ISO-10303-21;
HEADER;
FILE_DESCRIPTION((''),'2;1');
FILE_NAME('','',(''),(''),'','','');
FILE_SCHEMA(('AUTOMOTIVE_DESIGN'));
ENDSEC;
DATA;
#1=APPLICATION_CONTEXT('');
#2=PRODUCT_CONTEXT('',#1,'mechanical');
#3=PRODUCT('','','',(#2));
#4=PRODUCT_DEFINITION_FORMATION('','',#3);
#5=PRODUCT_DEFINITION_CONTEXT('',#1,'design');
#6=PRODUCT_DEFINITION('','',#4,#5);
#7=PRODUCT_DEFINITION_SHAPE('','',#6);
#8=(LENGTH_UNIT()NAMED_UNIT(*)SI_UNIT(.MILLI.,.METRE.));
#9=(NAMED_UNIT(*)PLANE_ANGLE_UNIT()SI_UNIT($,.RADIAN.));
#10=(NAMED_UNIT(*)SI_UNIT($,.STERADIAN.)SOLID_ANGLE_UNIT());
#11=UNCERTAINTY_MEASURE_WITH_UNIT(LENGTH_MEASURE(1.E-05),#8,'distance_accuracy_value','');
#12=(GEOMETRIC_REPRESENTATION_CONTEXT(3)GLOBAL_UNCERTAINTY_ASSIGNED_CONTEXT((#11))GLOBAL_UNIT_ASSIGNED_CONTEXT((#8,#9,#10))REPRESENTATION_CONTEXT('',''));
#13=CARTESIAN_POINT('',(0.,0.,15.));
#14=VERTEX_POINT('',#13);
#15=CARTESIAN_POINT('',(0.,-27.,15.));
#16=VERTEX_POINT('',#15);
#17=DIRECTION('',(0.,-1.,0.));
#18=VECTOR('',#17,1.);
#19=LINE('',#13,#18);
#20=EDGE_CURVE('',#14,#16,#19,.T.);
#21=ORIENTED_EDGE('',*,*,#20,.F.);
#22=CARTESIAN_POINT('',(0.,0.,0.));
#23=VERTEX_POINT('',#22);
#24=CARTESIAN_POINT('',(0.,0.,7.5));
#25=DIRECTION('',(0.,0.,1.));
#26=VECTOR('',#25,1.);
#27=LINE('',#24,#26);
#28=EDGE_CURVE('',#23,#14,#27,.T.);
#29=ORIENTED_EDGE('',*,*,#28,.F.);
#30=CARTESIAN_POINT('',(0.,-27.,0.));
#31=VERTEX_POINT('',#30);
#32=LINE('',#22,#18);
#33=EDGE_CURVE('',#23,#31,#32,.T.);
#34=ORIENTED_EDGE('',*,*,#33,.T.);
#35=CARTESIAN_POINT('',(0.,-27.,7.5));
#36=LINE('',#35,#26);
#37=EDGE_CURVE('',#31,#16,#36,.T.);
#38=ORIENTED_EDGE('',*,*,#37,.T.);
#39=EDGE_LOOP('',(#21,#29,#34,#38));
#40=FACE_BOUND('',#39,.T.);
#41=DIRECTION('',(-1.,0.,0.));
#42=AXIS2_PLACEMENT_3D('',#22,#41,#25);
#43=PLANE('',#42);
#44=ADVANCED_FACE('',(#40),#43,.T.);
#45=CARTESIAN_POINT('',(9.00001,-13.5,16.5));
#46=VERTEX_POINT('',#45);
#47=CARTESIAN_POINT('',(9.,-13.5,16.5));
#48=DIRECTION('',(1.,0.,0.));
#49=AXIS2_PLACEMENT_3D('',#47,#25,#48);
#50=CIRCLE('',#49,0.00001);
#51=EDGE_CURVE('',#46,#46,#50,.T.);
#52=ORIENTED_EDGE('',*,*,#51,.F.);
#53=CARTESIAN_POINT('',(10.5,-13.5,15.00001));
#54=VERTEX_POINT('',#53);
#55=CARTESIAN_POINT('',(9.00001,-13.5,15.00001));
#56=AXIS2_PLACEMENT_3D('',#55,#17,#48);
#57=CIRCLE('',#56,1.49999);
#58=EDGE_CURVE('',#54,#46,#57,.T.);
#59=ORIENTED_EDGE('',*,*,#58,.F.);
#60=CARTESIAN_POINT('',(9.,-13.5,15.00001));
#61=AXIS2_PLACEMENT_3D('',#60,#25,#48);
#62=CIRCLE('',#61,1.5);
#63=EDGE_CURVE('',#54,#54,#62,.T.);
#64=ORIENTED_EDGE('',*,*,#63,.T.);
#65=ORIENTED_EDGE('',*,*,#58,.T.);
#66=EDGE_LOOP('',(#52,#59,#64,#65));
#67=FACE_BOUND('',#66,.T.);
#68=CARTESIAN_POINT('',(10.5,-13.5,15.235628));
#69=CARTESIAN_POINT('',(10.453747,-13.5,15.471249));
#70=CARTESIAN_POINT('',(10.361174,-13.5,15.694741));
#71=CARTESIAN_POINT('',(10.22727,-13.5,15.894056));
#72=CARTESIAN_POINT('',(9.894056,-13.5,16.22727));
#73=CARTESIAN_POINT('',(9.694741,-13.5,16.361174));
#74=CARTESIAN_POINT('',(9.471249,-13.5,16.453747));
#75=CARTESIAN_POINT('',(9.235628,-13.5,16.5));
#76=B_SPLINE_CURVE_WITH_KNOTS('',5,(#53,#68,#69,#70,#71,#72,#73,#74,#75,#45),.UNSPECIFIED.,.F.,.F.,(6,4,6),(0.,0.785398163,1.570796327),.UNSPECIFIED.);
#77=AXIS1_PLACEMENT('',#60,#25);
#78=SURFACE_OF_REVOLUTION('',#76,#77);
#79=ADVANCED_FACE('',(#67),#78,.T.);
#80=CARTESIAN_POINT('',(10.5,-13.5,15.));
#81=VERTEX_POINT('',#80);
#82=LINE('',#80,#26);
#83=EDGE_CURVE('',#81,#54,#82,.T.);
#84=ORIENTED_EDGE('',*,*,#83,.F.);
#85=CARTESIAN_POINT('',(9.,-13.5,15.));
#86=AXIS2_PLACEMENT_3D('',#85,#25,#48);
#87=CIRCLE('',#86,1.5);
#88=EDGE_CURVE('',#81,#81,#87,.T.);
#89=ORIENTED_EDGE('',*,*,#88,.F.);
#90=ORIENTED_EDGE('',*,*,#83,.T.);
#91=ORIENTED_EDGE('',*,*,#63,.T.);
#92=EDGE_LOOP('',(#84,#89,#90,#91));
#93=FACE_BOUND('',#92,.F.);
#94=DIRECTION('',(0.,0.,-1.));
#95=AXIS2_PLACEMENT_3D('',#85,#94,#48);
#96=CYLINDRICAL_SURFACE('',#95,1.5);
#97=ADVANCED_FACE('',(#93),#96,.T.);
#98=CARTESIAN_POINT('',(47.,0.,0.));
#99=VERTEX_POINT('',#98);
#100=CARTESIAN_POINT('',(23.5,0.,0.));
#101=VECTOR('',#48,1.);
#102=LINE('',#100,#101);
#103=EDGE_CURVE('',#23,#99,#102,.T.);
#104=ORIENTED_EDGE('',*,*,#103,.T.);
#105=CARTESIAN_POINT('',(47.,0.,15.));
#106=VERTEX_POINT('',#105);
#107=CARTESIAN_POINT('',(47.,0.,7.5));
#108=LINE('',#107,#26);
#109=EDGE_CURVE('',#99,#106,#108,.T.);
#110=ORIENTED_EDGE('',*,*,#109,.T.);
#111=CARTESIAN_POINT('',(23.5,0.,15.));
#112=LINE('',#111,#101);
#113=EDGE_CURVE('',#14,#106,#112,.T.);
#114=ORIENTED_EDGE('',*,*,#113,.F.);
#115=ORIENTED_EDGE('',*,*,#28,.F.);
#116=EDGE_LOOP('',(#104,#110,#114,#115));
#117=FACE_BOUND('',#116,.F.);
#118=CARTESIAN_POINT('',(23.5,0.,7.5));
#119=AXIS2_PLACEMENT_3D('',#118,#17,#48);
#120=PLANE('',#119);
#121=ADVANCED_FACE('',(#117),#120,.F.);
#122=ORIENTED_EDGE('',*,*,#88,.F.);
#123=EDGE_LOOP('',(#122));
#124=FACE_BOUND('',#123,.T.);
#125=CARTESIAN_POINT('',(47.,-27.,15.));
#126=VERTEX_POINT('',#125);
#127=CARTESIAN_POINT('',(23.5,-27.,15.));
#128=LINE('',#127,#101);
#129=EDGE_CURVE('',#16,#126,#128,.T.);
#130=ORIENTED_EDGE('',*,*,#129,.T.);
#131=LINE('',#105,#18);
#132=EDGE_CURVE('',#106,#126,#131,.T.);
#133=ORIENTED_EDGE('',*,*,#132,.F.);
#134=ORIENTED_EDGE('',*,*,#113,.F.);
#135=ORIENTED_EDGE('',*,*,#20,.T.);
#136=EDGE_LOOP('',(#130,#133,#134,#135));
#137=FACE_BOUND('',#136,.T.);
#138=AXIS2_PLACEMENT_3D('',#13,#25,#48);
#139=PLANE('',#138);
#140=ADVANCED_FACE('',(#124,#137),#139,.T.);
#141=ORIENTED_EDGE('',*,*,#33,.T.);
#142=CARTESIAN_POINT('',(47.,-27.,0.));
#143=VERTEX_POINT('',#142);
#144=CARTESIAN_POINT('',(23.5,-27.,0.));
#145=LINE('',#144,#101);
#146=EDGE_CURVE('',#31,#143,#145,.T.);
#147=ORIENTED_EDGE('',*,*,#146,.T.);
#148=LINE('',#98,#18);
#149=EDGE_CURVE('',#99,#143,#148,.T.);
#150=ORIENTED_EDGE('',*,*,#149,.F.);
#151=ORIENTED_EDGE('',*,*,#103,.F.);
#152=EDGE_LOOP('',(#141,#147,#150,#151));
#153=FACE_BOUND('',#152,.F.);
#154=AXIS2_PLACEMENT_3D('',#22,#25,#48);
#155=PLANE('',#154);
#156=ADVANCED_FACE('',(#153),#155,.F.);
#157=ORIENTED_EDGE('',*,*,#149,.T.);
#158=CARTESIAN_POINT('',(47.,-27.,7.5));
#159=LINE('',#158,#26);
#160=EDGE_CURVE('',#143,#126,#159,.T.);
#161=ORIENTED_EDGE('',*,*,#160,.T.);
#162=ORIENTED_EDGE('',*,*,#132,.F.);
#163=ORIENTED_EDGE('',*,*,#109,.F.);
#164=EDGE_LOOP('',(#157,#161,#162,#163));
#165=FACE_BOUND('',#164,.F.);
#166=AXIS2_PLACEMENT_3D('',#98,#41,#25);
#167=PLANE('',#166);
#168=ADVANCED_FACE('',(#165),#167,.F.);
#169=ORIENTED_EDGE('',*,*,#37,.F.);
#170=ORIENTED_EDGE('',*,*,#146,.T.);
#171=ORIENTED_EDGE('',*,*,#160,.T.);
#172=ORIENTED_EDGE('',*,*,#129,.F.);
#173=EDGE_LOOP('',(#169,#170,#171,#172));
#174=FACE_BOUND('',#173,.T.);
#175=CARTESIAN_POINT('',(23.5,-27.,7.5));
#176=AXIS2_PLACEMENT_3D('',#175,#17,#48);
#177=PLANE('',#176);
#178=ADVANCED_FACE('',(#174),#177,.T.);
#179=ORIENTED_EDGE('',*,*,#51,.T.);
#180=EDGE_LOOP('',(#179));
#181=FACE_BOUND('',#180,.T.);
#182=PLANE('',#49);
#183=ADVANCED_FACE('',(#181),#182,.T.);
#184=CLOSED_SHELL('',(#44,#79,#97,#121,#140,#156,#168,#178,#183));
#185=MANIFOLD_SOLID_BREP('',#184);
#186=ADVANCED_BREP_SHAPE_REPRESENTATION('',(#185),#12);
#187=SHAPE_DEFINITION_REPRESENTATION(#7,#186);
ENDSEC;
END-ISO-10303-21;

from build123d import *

# Parameters (mm, degrees)
F0_W     = 47
F0_H     = 15
F1_DEPTH = 27
F2_R     = 1.5
F3_DEPTH = 1.5
F4_R     = 1.49999


# Not quite as in the source:
# - a fillet or chamfer is up to 0.001 mm smaller than in the source, because OpenCascade refuses the exact size


with BuildPart() as f1:
    # F0 (on Front) → F1 (new body)
    with BuildSketch(Plane.XZ):
        with Locations((23.5, 7.5)):
            Rectangle(F0_W, F0_H)
    extrude(amount=F1_DEPTH)

    # F2 (on face) → F3 (join)
    with BuildSketch(Plane.XY.offset(15)):
        with Locations((9, -13.5)):
            Circle(F2_R)
    extrude(amount=F3_DEPTH)

    # F4 (radius 1.5 in the source; OpenCascade refuses exactly that, so slightly less here)
    f4_edges = [f1.edges().sort_by_distance(p)[0] for p in [
        (7.5, -13.5, 16.5),
    ]]
    fillet(f4_edges, radius=F4_R)


solid = f1.part
